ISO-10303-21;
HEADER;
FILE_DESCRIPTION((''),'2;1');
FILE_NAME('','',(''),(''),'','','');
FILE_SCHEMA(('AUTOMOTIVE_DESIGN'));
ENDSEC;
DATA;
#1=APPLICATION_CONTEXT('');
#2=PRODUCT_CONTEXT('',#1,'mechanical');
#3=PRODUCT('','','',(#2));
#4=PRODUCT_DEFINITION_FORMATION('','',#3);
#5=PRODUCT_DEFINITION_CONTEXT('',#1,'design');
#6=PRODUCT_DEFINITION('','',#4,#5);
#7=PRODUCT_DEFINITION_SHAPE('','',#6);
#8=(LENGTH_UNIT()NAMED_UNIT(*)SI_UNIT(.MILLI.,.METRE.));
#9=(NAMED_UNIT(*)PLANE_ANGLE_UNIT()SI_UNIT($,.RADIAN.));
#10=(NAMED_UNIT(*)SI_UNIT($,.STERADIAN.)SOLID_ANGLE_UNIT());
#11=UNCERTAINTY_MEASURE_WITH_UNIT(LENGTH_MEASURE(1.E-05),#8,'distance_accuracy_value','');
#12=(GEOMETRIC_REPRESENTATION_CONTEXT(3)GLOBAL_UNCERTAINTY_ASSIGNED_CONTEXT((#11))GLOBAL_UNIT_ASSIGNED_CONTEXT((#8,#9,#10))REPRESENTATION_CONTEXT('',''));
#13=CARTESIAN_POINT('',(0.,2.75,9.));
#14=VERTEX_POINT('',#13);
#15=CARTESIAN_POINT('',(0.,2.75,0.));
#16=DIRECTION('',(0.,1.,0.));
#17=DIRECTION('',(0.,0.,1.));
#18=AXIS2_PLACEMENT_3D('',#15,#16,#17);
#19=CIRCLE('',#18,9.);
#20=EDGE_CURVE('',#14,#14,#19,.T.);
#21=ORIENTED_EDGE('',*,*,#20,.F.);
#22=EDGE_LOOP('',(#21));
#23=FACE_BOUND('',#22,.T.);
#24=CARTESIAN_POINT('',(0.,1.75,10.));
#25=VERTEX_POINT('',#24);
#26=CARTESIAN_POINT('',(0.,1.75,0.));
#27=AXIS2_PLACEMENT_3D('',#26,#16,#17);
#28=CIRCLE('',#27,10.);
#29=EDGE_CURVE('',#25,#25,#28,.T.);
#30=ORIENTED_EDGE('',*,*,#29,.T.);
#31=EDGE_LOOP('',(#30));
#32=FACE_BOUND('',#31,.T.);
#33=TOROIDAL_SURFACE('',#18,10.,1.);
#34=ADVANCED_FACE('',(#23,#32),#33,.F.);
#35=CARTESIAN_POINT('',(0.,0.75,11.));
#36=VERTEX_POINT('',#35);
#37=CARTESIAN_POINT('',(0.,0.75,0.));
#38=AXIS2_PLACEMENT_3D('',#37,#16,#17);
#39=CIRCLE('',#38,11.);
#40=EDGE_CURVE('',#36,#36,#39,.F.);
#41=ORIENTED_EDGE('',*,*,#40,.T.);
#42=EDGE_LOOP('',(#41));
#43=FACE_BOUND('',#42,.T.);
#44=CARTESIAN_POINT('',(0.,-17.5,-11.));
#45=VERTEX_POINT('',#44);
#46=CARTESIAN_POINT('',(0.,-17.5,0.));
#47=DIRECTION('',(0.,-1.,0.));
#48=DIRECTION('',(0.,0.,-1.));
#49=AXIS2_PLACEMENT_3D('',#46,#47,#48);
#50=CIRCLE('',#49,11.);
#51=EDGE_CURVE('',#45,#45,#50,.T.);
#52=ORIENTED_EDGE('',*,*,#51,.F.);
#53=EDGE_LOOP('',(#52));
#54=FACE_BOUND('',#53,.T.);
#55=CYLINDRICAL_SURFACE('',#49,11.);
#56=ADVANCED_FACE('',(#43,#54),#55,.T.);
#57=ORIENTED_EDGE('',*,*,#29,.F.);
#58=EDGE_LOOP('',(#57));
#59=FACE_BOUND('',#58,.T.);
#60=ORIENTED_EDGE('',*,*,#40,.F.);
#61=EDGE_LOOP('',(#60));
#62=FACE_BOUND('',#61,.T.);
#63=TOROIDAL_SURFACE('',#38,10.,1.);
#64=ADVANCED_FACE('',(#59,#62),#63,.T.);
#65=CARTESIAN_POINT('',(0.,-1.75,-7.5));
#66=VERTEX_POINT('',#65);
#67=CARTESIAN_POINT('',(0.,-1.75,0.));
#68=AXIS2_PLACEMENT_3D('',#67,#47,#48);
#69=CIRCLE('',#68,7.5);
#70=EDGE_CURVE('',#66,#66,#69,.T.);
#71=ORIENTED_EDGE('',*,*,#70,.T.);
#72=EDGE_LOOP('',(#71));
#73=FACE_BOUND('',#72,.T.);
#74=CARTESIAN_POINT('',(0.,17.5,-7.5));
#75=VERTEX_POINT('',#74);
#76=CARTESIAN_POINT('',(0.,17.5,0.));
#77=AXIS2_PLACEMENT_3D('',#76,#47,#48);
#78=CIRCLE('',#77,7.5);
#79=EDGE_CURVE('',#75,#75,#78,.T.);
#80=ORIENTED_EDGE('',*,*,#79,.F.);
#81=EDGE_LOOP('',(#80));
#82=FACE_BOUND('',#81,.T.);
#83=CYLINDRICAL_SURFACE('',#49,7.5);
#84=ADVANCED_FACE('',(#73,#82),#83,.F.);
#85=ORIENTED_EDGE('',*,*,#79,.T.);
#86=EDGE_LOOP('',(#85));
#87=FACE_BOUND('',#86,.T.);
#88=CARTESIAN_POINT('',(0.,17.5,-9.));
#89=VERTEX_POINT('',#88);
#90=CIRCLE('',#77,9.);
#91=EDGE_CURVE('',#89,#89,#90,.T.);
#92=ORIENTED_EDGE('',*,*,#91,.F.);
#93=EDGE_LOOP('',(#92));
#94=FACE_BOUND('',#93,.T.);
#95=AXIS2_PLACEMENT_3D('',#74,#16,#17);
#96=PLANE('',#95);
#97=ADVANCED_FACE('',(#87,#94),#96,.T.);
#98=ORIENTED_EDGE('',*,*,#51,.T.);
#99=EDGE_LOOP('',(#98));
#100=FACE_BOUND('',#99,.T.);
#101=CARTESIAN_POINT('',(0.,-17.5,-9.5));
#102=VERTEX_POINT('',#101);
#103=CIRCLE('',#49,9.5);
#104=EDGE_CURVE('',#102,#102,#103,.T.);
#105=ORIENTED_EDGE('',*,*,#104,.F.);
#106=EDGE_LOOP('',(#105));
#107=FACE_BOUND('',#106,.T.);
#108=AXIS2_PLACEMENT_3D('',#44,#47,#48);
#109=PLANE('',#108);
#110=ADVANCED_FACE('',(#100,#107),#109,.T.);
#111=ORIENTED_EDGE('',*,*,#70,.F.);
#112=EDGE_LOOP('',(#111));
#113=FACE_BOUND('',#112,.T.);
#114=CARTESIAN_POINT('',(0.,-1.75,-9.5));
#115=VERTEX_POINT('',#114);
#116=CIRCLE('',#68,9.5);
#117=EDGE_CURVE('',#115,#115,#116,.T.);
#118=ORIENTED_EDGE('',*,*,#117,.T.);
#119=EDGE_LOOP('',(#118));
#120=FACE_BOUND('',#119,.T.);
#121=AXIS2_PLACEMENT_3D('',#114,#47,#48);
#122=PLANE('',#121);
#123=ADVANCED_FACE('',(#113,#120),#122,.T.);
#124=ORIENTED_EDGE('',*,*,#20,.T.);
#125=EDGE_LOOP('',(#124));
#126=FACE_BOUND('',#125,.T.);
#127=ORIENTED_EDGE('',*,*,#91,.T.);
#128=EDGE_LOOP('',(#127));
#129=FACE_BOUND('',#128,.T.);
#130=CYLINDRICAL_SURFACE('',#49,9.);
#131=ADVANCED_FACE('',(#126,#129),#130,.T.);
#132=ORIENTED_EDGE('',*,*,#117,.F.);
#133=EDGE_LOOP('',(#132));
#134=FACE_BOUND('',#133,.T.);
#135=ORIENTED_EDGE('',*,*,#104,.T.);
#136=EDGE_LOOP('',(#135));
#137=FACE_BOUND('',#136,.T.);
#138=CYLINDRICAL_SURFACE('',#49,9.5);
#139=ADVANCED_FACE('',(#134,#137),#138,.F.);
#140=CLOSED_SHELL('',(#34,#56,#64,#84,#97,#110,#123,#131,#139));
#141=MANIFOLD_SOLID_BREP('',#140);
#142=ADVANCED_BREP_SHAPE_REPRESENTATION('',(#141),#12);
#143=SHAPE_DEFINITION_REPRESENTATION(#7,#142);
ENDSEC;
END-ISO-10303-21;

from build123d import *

# Parameters (mm, degrees)
FILLET1_R = 1


with BuildPart() as part:
    # Sketch1 → Revolve1 (revolve)
    with BuildSketch(Plane(origin=(0, 0, 0), x_dir=(0, 0, -1), z_dir=(1, 0, 0))):
        Polygon((7.5, 17.5), (9, 17.5), (9, 1.75), (11, 1.75), (11, -17.5), (9.5, -17.5), (9.5, -1.75), (7.5, -1.75), align=None)
    revolve(axis=Axis((0, -17.5, 0), (0, 1, 0)))

    # Fillet1
    fillet1_edges = [part.edges().sort_by_distance(p)[0] for p in [
        (0, 1.75, 11),
        (0, 1.75, 9),
    ]]
    fillet(fillet1_edges, radius=FILLET1_R - 0.0001)  # a hair under: the kernel refuses the full size


solid = part.part
